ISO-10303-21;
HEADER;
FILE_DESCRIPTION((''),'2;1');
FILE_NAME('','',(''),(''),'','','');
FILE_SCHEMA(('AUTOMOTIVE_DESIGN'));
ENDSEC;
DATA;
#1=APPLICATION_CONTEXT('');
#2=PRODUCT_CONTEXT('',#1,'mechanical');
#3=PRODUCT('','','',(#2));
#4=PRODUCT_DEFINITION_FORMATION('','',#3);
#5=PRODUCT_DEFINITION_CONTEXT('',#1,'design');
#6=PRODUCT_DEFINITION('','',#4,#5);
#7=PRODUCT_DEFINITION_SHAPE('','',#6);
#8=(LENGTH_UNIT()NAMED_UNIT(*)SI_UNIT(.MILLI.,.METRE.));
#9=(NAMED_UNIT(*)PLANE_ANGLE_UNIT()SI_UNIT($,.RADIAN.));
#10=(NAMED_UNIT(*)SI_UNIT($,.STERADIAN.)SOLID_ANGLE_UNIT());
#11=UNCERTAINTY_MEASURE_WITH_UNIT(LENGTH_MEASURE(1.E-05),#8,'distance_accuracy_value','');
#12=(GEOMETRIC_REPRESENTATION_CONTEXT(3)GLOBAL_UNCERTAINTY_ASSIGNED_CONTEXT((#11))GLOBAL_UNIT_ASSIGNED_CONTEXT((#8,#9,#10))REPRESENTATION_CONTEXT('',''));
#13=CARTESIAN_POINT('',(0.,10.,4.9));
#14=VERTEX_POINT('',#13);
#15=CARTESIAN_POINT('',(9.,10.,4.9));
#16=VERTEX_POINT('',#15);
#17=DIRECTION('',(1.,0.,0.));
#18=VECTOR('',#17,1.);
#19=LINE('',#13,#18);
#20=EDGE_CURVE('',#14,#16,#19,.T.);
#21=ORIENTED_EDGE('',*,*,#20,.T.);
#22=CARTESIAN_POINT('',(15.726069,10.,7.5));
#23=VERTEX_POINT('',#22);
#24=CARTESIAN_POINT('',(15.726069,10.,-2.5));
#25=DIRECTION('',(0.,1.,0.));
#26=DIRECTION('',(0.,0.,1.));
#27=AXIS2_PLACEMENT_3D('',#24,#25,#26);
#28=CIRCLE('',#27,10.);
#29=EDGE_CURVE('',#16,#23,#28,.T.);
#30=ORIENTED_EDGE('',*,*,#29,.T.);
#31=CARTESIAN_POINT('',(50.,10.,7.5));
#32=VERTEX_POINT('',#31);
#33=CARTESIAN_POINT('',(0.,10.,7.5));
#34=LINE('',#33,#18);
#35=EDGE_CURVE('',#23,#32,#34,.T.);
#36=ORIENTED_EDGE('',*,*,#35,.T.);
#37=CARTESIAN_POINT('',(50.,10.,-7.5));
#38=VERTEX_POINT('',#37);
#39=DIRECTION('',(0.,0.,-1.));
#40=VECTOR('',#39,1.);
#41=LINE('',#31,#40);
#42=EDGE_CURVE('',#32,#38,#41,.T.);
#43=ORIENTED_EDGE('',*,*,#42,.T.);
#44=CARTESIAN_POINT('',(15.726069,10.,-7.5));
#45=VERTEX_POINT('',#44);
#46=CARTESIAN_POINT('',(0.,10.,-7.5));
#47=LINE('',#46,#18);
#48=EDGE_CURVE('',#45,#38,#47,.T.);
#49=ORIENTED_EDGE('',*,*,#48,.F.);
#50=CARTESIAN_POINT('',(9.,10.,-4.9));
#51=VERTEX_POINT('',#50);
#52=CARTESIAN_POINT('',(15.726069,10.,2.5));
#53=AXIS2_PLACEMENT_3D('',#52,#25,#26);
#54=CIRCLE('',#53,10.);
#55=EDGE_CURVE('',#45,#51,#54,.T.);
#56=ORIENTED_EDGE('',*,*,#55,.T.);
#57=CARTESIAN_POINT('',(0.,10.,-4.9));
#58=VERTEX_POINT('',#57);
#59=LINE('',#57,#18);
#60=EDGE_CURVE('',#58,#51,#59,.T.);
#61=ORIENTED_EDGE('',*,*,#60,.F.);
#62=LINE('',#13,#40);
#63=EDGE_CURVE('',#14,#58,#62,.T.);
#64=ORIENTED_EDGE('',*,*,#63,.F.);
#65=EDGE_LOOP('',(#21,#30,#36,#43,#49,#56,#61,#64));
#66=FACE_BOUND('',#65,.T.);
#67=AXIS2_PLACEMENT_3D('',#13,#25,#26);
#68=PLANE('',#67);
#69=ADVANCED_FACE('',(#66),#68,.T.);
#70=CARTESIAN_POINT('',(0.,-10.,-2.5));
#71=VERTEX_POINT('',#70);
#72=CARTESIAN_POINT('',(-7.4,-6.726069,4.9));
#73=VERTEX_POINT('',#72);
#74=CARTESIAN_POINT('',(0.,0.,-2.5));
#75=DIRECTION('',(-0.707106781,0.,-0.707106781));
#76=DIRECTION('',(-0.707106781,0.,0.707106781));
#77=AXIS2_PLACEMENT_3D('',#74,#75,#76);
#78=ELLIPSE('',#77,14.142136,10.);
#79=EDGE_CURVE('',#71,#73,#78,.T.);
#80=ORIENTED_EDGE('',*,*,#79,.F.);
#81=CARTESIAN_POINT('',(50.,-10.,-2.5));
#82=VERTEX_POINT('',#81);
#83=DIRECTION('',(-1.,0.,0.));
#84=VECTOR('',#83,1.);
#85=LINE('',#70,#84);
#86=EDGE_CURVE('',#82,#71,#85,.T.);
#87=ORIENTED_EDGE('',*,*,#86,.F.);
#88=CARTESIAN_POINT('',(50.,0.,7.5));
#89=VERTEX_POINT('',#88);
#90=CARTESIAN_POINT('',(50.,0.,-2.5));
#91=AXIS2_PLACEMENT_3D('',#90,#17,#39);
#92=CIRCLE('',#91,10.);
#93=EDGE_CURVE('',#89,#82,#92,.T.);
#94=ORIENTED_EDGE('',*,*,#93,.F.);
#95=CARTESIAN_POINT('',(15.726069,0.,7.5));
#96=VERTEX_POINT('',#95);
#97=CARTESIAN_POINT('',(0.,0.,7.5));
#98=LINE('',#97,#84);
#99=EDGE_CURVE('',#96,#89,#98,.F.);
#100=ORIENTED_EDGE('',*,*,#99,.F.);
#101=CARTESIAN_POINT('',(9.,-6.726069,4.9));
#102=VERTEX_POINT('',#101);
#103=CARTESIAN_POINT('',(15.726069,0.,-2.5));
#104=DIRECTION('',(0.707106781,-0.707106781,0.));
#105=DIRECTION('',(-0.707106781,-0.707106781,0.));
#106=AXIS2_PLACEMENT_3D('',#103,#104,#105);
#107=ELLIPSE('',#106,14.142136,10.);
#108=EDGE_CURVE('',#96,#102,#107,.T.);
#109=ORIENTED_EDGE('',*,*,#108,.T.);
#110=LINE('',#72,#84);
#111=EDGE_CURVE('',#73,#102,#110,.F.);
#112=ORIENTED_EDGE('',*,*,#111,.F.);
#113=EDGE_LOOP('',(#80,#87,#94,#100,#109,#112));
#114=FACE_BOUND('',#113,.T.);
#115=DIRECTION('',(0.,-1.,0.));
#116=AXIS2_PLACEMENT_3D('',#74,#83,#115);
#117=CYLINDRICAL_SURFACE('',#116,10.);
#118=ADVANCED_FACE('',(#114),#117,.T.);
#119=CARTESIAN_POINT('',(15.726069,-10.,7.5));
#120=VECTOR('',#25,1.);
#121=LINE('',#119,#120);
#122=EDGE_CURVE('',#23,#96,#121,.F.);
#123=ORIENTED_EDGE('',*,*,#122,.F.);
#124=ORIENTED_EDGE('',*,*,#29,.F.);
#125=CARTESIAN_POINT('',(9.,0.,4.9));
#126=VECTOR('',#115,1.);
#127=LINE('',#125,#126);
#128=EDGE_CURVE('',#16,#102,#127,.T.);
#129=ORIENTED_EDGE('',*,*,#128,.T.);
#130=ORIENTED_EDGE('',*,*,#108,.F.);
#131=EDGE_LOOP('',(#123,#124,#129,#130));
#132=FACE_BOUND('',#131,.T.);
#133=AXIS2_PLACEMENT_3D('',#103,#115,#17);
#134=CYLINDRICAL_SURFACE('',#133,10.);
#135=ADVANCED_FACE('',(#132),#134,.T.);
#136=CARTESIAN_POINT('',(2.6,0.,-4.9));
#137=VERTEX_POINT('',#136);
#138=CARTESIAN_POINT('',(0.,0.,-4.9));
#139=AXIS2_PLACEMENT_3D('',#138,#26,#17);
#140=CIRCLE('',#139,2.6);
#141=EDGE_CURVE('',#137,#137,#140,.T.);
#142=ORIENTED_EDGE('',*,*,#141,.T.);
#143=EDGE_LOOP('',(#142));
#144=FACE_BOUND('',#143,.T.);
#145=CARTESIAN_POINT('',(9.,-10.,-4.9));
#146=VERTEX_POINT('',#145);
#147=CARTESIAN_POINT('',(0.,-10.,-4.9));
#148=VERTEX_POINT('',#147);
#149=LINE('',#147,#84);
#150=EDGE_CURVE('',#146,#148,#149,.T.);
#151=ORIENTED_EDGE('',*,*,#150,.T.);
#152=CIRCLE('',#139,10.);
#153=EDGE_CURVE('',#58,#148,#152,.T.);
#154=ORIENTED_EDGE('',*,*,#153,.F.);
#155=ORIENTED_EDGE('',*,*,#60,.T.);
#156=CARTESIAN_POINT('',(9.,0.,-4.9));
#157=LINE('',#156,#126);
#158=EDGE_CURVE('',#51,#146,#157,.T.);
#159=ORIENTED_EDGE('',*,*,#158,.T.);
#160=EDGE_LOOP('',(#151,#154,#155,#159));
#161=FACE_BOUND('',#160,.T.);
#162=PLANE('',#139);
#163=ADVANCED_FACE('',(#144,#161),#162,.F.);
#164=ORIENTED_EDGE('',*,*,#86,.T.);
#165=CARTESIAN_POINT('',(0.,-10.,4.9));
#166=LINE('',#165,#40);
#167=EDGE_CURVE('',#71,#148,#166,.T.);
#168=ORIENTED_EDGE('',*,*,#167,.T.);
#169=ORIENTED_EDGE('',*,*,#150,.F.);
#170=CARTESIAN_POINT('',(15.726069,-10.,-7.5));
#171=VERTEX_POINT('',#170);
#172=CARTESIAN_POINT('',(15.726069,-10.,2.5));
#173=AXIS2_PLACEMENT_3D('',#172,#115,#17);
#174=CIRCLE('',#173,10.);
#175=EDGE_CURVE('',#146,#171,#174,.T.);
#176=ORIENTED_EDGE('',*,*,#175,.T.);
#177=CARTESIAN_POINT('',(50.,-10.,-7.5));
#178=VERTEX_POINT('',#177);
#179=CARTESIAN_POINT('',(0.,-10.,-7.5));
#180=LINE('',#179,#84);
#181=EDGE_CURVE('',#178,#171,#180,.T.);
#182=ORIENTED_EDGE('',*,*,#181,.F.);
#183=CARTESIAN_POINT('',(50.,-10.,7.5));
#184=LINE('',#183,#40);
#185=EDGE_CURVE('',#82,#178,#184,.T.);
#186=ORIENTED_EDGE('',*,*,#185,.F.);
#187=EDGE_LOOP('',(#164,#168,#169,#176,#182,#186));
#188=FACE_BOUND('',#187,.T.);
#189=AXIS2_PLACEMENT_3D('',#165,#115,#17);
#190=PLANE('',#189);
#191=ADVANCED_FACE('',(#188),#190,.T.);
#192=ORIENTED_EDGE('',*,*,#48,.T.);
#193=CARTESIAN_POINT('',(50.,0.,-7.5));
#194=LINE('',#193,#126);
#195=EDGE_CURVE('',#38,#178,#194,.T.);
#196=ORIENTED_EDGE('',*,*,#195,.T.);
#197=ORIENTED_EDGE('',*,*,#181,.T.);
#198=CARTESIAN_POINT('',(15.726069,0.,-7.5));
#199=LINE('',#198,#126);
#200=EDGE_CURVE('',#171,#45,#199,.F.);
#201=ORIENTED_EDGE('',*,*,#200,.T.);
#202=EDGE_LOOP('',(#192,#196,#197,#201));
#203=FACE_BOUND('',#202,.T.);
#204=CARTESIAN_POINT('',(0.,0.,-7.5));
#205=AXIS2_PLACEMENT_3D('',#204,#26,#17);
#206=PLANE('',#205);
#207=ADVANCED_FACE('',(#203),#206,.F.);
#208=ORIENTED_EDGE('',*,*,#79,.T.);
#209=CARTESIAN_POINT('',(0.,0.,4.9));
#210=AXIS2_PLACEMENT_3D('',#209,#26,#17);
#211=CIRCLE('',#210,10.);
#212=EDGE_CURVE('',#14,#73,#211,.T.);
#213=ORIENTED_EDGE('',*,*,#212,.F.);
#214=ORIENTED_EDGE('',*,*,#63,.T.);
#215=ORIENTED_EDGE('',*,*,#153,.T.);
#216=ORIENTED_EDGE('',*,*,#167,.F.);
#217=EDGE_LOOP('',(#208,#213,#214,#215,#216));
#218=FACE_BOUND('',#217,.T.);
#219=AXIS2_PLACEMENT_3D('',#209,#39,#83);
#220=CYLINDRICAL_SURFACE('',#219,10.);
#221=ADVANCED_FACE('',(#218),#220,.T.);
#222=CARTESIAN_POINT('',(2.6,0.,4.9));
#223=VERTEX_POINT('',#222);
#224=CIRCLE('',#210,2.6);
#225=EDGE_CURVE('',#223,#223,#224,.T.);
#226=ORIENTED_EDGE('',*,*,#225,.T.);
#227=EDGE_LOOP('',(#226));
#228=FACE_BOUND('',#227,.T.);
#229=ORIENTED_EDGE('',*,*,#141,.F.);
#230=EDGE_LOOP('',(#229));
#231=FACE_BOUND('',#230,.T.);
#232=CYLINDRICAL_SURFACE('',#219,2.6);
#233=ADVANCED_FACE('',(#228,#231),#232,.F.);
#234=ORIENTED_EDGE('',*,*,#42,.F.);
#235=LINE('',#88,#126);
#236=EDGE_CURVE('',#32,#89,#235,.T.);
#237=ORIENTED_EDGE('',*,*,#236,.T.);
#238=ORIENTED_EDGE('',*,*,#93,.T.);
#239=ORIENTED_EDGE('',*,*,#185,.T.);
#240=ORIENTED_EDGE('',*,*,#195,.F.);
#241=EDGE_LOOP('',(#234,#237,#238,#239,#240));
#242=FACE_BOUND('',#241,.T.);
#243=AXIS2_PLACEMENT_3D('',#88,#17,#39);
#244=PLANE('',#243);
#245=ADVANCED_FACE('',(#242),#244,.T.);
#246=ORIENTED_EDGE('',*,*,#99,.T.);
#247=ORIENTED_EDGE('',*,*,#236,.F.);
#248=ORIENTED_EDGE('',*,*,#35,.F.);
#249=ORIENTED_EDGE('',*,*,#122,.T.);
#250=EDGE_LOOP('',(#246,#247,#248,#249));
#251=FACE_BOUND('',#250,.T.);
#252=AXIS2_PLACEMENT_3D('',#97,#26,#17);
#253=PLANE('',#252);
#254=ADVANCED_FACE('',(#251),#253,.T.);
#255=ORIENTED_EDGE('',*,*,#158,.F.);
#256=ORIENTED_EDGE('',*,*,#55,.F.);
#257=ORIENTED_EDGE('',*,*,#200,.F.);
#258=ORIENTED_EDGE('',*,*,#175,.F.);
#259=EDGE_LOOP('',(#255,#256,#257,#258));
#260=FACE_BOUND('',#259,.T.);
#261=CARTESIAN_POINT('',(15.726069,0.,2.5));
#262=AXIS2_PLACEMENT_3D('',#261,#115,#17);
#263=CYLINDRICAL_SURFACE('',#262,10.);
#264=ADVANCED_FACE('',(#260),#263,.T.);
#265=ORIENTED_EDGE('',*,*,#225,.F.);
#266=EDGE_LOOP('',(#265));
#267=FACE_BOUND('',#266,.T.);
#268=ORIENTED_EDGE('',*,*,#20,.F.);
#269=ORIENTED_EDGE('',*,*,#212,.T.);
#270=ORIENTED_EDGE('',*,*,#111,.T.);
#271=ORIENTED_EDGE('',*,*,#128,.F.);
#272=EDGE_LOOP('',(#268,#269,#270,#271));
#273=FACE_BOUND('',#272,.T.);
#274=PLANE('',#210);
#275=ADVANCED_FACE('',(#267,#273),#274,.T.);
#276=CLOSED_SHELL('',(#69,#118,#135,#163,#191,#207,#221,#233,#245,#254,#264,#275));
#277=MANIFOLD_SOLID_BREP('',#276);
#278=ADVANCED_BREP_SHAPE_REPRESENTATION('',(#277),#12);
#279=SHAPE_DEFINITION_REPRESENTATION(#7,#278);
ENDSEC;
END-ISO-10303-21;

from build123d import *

# Parameters (mm, degrees)
SKETCH1_R           = 2.6
BOSS_EXTRUDE1_DEPTH = 4.9
SKETCH1_3_W         = 41
SKETCH1_3_H         = 20
BOSS_EXTRUDE2_DEPTH = 7.5
FILLET1_R           = 10


with BuildPart() as part:
    # Sketch1 → Boss-Extrude1 (new, symmetric)
    with BuildSketch(Plane.XY):
        with BuildLine():
            Line((9, 10), (0, 10))
            ThreePointArc((0, 10), (-10, 0), (0, -10))
            Line((0, -10), (9, -10))
            Line((9, -10), (9, 10))
        make_face()
        Circle(SKETCH1_R, mode=Mode.SUBTRACT)
    extrude(amount=BOSS_EXTRUDE1_DEPTH, both=True)

    # Sketch1<3> → Boss-Extrude2 (add, symmetric)
    with BuildSketch(Plane.XY):
        with Locations((29.5, 0)):
            Rectangle(SKETCH1_3_W, SKETCH1_3_H)
    extrude(amount=BOSS_EXTRUDE2_DEPTH, both=True)

    # Fillet1
    # the kernel refuses this fillet: 10 mm, written as the material it takes off along each edge
    with BuildSketch(Plane(origin=(-16, -10, 7.5), x_dir=(0, 0, -1), z_dir=(1, 0, 0))) as fillet1_piece_1:
        with BuildLine():
            CenterArc((FILLET1_R, FILLET1_R), FILLET1_R, 180, 90)
            Line((0, FILLET1_R), (-FILLET1_R * 0.02, FILLET1_R))
            Line((-FILLET1_R * 0.02, FILLET1_R), (-FILLET1_R * 0.02, -FILLET1_R * 0.02))
            Line((-FILLET1_R * 0.02, -FILLET1_R * 0.02), (FILLET1_R, -FILLET1_R * 0.02))
            Line((FILLET1_R, -FILLET1_R * 0.02), (FILLET1_R, 0))
        make_face()
    extrude(amount=91, mode=Mode.SUBTRACT)
    with BuildSketch(Plane(origin=(9, 26.815171721, -7.5), x_dir=(1, 0, 0), z_dir=(0, -1, 0))) as fillet1_piece_2:
        with BuildLine():
            CenterArc((6.726068688, 10), FILLET1_R, 227.73141557, 42.26858443)
            Line((0, 2.6), (-0.134521374, 2.452))
            ThreePointArc((-0.134521374, 2.452), (-0.2, 1.3), (-0.2, 0))
            Line((-0.2, 0), (0, -0.2))
            Line((0, -0.2), (6.726068688, -0.2))
            Line((6.726068688, -0.2), (6.726068688, 0))
        make_face()
    extrude(amount=53.630343442, mode=Mode.SUBTRACT)
    with BuildSketch(Plane(origin=(9, 26.815171721, 7.5), x_dir=(1, 0, 0), z_dir=(0, -1, 0))) as fillet1_piece_3:
        with BuildLine():
            CenterArc((6.726068688, -10), FILLET1_R, 90, 42.26858443)
            Line((0, -2.6), (-0.134521374, -2.452))
            ThreePointArc((-0.134521374, -2.452), (-0.2, -1.3), (-0.2, 0))
            Line((-0.2, 0), (0, 0.2))
            Line((0, 0.2), (6.726068688, 0.2))
            Line((6.726068688, 0.2), (6.726068688, 0))
        make_face()
    extrude(amount=53.630343442, mode=Mode.SUBTRACT)


solid = part.part
